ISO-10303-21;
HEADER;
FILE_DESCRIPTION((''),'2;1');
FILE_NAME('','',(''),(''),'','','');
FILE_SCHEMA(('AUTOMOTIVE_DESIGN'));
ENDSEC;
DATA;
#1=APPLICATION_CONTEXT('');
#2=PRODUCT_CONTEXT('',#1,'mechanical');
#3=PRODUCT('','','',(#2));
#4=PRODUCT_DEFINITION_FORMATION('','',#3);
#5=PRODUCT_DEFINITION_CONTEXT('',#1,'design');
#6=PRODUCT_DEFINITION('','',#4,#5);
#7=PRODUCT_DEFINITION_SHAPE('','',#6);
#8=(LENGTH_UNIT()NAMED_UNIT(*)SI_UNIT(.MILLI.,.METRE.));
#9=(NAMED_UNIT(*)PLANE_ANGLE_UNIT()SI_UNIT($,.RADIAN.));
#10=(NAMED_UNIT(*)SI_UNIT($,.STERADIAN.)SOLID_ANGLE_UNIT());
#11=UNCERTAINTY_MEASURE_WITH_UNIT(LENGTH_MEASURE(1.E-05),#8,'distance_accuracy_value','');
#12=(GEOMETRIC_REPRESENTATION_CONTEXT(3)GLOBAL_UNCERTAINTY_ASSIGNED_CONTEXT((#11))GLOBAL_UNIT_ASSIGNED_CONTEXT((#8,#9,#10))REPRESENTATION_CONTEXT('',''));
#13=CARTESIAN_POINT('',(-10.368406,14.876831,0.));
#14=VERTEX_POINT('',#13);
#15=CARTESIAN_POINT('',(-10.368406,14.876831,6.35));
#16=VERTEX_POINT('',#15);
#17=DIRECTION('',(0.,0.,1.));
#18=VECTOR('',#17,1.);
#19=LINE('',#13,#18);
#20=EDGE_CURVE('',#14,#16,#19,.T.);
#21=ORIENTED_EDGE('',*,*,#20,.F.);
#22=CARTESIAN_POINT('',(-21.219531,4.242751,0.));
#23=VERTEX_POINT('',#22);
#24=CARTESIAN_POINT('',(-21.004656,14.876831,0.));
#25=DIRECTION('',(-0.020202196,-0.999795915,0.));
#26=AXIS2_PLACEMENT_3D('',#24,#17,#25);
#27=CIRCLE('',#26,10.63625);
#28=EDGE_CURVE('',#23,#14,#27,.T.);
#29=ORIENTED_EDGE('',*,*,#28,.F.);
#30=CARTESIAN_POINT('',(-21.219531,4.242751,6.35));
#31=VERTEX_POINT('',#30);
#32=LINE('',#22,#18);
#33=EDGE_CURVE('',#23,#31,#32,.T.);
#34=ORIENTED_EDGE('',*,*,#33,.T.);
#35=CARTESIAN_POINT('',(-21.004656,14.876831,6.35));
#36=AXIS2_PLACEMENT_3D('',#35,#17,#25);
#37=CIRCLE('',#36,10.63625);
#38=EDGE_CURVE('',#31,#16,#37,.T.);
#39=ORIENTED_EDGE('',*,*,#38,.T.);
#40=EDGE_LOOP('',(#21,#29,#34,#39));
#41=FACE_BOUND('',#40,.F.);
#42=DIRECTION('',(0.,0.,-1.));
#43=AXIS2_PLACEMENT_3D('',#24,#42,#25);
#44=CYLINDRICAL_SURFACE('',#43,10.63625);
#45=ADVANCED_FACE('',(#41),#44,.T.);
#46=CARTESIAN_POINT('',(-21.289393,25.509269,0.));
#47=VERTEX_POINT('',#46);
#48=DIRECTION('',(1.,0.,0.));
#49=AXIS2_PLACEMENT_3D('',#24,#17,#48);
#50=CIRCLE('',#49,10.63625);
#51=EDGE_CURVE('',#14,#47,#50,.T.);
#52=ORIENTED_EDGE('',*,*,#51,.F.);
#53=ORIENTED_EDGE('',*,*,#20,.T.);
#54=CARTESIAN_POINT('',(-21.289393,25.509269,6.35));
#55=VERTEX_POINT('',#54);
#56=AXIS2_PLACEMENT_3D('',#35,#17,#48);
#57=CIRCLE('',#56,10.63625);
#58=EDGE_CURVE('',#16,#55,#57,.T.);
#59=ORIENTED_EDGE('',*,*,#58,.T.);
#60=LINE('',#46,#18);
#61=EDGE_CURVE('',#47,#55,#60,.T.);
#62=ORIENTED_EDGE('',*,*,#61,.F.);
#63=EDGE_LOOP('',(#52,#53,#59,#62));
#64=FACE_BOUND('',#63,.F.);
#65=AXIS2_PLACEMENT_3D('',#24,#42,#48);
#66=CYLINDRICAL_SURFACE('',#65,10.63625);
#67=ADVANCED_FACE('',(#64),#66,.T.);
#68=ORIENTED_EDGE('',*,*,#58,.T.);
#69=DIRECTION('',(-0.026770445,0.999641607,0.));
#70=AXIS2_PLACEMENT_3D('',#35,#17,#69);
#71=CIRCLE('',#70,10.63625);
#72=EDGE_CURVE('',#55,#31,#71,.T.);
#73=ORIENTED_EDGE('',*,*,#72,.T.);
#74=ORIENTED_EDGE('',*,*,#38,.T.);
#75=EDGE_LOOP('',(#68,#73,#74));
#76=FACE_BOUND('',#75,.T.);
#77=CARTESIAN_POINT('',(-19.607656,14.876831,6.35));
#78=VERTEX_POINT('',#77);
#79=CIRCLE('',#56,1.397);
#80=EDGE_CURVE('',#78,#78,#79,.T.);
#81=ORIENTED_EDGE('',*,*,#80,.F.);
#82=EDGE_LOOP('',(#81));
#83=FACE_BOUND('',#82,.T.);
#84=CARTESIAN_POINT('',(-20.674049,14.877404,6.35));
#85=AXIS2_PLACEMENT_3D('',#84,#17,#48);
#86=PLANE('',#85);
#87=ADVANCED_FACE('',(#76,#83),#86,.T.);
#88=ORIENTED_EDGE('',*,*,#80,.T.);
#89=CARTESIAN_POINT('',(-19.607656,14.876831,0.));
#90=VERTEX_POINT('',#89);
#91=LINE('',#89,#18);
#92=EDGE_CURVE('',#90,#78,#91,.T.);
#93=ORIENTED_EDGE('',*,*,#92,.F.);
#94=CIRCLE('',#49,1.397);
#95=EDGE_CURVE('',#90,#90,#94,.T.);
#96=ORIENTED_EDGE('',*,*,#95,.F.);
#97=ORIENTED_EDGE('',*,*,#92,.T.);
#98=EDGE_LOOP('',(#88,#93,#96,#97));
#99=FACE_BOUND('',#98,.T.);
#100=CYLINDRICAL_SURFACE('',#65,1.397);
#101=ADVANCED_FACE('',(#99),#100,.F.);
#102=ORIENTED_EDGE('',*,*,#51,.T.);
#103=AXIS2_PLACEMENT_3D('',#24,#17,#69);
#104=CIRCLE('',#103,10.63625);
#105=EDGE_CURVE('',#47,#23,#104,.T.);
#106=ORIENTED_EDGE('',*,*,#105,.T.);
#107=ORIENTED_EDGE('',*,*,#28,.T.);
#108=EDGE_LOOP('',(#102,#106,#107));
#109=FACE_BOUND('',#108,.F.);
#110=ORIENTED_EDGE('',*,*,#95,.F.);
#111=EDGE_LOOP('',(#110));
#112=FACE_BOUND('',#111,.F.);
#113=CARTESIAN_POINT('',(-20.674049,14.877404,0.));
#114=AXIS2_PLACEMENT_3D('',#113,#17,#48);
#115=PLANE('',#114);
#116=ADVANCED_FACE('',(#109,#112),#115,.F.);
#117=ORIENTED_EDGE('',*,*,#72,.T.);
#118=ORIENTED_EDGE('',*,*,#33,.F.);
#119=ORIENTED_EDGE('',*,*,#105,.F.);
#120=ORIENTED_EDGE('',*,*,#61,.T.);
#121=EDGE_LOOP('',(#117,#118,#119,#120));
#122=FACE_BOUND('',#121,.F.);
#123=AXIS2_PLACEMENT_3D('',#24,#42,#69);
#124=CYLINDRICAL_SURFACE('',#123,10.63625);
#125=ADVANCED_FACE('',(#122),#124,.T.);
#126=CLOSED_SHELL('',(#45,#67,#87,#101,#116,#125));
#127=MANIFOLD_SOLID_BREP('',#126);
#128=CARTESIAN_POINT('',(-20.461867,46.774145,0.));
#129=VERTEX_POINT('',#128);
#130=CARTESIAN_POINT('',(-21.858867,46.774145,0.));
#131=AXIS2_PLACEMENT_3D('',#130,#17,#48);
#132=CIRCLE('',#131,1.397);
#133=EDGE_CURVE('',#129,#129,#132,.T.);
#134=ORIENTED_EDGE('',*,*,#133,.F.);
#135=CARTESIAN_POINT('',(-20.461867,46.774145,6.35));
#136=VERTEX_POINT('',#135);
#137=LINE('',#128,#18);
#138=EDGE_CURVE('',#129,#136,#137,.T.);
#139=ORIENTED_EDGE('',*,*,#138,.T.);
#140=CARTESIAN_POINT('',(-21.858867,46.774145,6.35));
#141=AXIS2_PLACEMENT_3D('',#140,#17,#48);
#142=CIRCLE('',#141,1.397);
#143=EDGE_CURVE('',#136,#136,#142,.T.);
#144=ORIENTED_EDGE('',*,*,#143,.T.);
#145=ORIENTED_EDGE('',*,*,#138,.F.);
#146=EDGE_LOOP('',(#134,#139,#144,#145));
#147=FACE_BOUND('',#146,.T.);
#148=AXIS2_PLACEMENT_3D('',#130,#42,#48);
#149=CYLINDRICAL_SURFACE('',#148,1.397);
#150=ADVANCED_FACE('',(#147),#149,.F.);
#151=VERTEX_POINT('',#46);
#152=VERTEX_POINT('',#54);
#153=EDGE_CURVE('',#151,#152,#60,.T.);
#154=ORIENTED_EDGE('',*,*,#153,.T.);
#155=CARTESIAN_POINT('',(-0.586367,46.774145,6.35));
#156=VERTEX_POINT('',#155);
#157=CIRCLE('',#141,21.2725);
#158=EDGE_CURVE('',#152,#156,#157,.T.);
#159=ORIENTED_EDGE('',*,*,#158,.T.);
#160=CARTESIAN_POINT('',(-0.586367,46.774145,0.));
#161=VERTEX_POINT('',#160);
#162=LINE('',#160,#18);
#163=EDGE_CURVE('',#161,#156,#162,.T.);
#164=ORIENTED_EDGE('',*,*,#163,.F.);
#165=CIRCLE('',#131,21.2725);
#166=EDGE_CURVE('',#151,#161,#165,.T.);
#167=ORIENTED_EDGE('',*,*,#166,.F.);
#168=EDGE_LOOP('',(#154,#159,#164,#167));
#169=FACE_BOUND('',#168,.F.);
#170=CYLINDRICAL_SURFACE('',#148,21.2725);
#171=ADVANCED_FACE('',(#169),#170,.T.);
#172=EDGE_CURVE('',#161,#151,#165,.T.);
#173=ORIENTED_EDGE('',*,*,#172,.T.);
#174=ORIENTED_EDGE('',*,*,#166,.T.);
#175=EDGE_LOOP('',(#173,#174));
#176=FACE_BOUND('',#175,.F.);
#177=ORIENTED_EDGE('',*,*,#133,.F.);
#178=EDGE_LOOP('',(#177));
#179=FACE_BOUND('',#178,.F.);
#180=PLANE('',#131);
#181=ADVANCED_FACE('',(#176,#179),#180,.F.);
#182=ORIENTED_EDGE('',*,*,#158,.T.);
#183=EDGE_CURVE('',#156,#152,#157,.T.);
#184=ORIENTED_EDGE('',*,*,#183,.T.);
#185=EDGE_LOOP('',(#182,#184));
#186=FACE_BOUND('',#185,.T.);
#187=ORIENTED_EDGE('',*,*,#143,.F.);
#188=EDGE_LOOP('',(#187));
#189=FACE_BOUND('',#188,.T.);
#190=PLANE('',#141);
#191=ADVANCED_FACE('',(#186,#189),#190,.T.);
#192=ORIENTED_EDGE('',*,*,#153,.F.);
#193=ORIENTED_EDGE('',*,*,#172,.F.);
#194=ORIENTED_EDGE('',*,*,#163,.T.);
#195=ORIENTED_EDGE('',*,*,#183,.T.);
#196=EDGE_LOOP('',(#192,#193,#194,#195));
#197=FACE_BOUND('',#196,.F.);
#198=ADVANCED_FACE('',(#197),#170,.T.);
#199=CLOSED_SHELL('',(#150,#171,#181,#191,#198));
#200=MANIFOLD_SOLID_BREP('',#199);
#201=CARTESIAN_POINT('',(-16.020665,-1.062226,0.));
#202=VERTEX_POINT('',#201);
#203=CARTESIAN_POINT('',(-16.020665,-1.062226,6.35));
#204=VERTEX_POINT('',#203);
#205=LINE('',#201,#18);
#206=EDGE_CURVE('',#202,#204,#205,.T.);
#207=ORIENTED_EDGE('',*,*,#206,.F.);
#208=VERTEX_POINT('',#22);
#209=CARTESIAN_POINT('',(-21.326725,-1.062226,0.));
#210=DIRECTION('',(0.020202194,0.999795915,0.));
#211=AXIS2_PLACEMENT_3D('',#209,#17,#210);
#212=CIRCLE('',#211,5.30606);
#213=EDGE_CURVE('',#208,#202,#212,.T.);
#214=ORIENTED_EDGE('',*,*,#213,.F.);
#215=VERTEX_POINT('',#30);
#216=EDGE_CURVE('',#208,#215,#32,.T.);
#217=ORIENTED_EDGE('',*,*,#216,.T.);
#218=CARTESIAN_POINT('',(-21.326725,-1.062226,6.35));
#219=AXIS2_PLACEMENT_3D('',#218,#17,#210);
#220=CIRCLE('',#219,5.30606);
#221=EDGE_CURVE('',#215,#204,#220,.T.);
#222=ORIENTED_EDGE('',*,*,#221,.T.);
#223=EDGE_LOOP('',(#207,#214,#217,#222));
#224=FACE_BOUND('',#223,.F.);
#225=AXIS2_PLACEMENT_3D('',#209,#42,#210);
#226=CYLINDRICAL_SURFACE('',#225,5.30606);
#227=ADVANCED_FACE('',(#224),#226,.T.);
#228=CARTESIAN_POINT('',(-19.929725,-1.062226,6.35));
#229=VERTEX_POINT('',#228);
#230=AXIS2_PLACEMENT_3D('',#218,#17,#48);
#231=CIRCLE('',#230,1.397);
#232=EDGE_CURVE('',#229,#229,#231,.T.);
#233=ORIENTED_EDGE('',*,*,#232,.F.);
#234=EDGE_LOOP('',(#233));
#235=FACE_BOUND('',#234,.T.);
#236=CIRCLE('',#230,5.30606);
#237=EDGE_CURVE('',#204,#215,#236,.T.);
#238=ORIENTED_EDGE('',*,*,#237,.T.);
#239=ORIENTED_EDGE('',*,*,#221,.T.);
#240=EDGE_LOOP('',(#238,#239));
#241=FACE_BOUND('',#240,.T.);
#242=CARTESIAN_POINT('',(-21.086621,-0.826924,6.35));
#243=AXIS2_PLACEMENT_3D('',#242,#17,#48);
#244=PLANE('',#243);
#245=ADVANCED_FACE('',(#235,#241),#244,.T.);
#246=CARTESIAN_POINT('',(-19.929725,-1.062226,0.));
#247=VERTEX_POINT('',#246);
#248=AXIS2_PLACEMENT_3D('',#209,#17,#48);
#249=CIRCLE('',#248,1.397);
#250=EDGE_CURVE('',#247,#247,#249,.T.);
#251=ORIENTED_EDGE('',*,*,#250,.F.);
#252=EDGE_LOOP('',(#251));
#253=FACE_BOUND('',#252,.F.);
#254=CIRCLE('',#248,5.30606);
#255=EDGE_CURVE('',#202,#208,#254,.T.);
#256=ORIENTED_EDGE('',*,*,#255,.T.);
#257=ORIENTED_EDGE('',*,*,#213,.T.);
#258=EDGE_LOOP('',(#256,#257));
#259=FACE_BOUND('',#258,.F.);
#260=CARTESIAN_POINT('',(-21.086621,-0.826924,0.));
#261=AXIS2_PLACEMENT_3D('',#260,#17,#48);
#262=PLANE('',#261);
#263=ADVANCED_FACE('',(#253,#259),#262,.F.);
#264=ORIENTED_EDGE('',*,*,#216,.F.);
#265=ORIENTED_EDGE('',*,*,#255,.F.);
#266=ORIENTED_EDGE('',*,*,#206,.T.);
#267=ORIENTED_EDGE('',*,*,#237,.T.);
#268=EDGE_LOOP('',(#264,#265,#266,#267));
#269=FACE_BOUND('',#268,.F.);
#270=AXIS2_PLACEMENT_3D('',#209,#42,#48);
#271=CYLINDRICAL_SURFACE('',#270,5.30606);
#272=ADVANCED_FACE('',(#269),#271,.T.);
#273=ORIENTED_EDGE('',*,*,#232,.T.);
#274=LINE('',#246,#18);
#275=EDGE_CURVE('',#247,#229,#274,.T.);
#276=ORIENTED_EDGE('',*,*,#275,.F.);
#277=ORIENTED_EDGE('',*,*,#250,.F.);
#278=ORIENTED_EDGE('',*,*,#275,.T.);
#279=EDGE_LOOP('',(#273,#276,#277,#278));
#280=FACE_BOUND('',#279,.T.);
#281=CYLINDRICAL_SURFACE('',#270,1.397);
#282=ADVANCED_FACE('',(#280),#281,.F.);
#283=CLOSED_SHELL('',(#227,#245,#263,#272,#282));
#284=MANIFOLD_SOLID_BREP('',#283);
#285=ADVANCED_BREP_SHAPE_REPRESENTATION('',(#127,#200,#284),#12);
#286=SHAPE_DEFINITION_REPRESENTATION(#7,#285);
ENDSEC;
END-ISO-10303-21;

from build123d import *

# Parameters (mm, degrees)
F0_R     = 1.397
F5_DEPTH = 6.35
F6_DEPTH = 6.35
F7_DEPTH = 6.35


# Not quite as in the source:
# - the program builds the solid bodies; features that only make, move or delete a surface that nothing else refers to are left out


with BuildPart() as f5:
    # F0 (on Top) → F5 (new body)
    with BuildSketch(Plane.XY):
        with BuildLine():
            ThreePointArc((-21.2893928371, 25.5092685574), (-6.6169283749, 31.9349210812), (-0.5863672337, 46.7741446483))
            ThreePointArc((-0.5863672337, 46.7741446483), (-37.1008060925, 61.6133682154), (-21.2893928371, 25.5092685574))
        make_face()
        with Locations((-21.8588672337, 46.7741446483)):
            Circle(F0_R, mode=Mode.SUBTRACT)
    extrude(amount=F5_DEPTH)

    # F0 (on Top) → F6 (join)
    with BuildSketch(Plane.XY):
        with BuildLine():
            ThreePointArc((-10.3684056873, 14.8768305106), (-13.5850438864, 22.4977999231), (-21.2893928371, 25.5092685574))
            ThreePointArc((-21.2893928371, 25.5092685574), (-31.640848297, 14.8418900995), (-21.219531291, 4.2427512116))
            ThreePointArc((-21.219531291, 4.2427512116), (-13.5600487997, 7.2802758737), (-10.3684056873, 14.8768305106))
        make_face()
        with Locations((-21.0046556873, 14.8768305106)):
            Circle(F0_R, mode=Mode.SUBTRACT)
    extrude(amount=F6_DEPTH)

    # F0 (on Top) → F7 (join)
    with BuildSketch(Plane.XY):
        with BuildLine():
            ThreePointArc((-16.0206653431, -1.0622259004), (-17.5370650156, 2.6516329184), (-21.219531291, 4.2427512116))
            ThreePointArc((-21.219531291, 4.2427512116), (-25.1163856705, -4.7760847192), (-16.0206653431, -1.0622259004))
        make_face()
        with Locations((-21.3267253431, -1.0622259004)):
            Circle(F0_R, mode=Mode.SUBTRACT)
    extrude(amount=F7_DEPTH)


solid = f5.part
